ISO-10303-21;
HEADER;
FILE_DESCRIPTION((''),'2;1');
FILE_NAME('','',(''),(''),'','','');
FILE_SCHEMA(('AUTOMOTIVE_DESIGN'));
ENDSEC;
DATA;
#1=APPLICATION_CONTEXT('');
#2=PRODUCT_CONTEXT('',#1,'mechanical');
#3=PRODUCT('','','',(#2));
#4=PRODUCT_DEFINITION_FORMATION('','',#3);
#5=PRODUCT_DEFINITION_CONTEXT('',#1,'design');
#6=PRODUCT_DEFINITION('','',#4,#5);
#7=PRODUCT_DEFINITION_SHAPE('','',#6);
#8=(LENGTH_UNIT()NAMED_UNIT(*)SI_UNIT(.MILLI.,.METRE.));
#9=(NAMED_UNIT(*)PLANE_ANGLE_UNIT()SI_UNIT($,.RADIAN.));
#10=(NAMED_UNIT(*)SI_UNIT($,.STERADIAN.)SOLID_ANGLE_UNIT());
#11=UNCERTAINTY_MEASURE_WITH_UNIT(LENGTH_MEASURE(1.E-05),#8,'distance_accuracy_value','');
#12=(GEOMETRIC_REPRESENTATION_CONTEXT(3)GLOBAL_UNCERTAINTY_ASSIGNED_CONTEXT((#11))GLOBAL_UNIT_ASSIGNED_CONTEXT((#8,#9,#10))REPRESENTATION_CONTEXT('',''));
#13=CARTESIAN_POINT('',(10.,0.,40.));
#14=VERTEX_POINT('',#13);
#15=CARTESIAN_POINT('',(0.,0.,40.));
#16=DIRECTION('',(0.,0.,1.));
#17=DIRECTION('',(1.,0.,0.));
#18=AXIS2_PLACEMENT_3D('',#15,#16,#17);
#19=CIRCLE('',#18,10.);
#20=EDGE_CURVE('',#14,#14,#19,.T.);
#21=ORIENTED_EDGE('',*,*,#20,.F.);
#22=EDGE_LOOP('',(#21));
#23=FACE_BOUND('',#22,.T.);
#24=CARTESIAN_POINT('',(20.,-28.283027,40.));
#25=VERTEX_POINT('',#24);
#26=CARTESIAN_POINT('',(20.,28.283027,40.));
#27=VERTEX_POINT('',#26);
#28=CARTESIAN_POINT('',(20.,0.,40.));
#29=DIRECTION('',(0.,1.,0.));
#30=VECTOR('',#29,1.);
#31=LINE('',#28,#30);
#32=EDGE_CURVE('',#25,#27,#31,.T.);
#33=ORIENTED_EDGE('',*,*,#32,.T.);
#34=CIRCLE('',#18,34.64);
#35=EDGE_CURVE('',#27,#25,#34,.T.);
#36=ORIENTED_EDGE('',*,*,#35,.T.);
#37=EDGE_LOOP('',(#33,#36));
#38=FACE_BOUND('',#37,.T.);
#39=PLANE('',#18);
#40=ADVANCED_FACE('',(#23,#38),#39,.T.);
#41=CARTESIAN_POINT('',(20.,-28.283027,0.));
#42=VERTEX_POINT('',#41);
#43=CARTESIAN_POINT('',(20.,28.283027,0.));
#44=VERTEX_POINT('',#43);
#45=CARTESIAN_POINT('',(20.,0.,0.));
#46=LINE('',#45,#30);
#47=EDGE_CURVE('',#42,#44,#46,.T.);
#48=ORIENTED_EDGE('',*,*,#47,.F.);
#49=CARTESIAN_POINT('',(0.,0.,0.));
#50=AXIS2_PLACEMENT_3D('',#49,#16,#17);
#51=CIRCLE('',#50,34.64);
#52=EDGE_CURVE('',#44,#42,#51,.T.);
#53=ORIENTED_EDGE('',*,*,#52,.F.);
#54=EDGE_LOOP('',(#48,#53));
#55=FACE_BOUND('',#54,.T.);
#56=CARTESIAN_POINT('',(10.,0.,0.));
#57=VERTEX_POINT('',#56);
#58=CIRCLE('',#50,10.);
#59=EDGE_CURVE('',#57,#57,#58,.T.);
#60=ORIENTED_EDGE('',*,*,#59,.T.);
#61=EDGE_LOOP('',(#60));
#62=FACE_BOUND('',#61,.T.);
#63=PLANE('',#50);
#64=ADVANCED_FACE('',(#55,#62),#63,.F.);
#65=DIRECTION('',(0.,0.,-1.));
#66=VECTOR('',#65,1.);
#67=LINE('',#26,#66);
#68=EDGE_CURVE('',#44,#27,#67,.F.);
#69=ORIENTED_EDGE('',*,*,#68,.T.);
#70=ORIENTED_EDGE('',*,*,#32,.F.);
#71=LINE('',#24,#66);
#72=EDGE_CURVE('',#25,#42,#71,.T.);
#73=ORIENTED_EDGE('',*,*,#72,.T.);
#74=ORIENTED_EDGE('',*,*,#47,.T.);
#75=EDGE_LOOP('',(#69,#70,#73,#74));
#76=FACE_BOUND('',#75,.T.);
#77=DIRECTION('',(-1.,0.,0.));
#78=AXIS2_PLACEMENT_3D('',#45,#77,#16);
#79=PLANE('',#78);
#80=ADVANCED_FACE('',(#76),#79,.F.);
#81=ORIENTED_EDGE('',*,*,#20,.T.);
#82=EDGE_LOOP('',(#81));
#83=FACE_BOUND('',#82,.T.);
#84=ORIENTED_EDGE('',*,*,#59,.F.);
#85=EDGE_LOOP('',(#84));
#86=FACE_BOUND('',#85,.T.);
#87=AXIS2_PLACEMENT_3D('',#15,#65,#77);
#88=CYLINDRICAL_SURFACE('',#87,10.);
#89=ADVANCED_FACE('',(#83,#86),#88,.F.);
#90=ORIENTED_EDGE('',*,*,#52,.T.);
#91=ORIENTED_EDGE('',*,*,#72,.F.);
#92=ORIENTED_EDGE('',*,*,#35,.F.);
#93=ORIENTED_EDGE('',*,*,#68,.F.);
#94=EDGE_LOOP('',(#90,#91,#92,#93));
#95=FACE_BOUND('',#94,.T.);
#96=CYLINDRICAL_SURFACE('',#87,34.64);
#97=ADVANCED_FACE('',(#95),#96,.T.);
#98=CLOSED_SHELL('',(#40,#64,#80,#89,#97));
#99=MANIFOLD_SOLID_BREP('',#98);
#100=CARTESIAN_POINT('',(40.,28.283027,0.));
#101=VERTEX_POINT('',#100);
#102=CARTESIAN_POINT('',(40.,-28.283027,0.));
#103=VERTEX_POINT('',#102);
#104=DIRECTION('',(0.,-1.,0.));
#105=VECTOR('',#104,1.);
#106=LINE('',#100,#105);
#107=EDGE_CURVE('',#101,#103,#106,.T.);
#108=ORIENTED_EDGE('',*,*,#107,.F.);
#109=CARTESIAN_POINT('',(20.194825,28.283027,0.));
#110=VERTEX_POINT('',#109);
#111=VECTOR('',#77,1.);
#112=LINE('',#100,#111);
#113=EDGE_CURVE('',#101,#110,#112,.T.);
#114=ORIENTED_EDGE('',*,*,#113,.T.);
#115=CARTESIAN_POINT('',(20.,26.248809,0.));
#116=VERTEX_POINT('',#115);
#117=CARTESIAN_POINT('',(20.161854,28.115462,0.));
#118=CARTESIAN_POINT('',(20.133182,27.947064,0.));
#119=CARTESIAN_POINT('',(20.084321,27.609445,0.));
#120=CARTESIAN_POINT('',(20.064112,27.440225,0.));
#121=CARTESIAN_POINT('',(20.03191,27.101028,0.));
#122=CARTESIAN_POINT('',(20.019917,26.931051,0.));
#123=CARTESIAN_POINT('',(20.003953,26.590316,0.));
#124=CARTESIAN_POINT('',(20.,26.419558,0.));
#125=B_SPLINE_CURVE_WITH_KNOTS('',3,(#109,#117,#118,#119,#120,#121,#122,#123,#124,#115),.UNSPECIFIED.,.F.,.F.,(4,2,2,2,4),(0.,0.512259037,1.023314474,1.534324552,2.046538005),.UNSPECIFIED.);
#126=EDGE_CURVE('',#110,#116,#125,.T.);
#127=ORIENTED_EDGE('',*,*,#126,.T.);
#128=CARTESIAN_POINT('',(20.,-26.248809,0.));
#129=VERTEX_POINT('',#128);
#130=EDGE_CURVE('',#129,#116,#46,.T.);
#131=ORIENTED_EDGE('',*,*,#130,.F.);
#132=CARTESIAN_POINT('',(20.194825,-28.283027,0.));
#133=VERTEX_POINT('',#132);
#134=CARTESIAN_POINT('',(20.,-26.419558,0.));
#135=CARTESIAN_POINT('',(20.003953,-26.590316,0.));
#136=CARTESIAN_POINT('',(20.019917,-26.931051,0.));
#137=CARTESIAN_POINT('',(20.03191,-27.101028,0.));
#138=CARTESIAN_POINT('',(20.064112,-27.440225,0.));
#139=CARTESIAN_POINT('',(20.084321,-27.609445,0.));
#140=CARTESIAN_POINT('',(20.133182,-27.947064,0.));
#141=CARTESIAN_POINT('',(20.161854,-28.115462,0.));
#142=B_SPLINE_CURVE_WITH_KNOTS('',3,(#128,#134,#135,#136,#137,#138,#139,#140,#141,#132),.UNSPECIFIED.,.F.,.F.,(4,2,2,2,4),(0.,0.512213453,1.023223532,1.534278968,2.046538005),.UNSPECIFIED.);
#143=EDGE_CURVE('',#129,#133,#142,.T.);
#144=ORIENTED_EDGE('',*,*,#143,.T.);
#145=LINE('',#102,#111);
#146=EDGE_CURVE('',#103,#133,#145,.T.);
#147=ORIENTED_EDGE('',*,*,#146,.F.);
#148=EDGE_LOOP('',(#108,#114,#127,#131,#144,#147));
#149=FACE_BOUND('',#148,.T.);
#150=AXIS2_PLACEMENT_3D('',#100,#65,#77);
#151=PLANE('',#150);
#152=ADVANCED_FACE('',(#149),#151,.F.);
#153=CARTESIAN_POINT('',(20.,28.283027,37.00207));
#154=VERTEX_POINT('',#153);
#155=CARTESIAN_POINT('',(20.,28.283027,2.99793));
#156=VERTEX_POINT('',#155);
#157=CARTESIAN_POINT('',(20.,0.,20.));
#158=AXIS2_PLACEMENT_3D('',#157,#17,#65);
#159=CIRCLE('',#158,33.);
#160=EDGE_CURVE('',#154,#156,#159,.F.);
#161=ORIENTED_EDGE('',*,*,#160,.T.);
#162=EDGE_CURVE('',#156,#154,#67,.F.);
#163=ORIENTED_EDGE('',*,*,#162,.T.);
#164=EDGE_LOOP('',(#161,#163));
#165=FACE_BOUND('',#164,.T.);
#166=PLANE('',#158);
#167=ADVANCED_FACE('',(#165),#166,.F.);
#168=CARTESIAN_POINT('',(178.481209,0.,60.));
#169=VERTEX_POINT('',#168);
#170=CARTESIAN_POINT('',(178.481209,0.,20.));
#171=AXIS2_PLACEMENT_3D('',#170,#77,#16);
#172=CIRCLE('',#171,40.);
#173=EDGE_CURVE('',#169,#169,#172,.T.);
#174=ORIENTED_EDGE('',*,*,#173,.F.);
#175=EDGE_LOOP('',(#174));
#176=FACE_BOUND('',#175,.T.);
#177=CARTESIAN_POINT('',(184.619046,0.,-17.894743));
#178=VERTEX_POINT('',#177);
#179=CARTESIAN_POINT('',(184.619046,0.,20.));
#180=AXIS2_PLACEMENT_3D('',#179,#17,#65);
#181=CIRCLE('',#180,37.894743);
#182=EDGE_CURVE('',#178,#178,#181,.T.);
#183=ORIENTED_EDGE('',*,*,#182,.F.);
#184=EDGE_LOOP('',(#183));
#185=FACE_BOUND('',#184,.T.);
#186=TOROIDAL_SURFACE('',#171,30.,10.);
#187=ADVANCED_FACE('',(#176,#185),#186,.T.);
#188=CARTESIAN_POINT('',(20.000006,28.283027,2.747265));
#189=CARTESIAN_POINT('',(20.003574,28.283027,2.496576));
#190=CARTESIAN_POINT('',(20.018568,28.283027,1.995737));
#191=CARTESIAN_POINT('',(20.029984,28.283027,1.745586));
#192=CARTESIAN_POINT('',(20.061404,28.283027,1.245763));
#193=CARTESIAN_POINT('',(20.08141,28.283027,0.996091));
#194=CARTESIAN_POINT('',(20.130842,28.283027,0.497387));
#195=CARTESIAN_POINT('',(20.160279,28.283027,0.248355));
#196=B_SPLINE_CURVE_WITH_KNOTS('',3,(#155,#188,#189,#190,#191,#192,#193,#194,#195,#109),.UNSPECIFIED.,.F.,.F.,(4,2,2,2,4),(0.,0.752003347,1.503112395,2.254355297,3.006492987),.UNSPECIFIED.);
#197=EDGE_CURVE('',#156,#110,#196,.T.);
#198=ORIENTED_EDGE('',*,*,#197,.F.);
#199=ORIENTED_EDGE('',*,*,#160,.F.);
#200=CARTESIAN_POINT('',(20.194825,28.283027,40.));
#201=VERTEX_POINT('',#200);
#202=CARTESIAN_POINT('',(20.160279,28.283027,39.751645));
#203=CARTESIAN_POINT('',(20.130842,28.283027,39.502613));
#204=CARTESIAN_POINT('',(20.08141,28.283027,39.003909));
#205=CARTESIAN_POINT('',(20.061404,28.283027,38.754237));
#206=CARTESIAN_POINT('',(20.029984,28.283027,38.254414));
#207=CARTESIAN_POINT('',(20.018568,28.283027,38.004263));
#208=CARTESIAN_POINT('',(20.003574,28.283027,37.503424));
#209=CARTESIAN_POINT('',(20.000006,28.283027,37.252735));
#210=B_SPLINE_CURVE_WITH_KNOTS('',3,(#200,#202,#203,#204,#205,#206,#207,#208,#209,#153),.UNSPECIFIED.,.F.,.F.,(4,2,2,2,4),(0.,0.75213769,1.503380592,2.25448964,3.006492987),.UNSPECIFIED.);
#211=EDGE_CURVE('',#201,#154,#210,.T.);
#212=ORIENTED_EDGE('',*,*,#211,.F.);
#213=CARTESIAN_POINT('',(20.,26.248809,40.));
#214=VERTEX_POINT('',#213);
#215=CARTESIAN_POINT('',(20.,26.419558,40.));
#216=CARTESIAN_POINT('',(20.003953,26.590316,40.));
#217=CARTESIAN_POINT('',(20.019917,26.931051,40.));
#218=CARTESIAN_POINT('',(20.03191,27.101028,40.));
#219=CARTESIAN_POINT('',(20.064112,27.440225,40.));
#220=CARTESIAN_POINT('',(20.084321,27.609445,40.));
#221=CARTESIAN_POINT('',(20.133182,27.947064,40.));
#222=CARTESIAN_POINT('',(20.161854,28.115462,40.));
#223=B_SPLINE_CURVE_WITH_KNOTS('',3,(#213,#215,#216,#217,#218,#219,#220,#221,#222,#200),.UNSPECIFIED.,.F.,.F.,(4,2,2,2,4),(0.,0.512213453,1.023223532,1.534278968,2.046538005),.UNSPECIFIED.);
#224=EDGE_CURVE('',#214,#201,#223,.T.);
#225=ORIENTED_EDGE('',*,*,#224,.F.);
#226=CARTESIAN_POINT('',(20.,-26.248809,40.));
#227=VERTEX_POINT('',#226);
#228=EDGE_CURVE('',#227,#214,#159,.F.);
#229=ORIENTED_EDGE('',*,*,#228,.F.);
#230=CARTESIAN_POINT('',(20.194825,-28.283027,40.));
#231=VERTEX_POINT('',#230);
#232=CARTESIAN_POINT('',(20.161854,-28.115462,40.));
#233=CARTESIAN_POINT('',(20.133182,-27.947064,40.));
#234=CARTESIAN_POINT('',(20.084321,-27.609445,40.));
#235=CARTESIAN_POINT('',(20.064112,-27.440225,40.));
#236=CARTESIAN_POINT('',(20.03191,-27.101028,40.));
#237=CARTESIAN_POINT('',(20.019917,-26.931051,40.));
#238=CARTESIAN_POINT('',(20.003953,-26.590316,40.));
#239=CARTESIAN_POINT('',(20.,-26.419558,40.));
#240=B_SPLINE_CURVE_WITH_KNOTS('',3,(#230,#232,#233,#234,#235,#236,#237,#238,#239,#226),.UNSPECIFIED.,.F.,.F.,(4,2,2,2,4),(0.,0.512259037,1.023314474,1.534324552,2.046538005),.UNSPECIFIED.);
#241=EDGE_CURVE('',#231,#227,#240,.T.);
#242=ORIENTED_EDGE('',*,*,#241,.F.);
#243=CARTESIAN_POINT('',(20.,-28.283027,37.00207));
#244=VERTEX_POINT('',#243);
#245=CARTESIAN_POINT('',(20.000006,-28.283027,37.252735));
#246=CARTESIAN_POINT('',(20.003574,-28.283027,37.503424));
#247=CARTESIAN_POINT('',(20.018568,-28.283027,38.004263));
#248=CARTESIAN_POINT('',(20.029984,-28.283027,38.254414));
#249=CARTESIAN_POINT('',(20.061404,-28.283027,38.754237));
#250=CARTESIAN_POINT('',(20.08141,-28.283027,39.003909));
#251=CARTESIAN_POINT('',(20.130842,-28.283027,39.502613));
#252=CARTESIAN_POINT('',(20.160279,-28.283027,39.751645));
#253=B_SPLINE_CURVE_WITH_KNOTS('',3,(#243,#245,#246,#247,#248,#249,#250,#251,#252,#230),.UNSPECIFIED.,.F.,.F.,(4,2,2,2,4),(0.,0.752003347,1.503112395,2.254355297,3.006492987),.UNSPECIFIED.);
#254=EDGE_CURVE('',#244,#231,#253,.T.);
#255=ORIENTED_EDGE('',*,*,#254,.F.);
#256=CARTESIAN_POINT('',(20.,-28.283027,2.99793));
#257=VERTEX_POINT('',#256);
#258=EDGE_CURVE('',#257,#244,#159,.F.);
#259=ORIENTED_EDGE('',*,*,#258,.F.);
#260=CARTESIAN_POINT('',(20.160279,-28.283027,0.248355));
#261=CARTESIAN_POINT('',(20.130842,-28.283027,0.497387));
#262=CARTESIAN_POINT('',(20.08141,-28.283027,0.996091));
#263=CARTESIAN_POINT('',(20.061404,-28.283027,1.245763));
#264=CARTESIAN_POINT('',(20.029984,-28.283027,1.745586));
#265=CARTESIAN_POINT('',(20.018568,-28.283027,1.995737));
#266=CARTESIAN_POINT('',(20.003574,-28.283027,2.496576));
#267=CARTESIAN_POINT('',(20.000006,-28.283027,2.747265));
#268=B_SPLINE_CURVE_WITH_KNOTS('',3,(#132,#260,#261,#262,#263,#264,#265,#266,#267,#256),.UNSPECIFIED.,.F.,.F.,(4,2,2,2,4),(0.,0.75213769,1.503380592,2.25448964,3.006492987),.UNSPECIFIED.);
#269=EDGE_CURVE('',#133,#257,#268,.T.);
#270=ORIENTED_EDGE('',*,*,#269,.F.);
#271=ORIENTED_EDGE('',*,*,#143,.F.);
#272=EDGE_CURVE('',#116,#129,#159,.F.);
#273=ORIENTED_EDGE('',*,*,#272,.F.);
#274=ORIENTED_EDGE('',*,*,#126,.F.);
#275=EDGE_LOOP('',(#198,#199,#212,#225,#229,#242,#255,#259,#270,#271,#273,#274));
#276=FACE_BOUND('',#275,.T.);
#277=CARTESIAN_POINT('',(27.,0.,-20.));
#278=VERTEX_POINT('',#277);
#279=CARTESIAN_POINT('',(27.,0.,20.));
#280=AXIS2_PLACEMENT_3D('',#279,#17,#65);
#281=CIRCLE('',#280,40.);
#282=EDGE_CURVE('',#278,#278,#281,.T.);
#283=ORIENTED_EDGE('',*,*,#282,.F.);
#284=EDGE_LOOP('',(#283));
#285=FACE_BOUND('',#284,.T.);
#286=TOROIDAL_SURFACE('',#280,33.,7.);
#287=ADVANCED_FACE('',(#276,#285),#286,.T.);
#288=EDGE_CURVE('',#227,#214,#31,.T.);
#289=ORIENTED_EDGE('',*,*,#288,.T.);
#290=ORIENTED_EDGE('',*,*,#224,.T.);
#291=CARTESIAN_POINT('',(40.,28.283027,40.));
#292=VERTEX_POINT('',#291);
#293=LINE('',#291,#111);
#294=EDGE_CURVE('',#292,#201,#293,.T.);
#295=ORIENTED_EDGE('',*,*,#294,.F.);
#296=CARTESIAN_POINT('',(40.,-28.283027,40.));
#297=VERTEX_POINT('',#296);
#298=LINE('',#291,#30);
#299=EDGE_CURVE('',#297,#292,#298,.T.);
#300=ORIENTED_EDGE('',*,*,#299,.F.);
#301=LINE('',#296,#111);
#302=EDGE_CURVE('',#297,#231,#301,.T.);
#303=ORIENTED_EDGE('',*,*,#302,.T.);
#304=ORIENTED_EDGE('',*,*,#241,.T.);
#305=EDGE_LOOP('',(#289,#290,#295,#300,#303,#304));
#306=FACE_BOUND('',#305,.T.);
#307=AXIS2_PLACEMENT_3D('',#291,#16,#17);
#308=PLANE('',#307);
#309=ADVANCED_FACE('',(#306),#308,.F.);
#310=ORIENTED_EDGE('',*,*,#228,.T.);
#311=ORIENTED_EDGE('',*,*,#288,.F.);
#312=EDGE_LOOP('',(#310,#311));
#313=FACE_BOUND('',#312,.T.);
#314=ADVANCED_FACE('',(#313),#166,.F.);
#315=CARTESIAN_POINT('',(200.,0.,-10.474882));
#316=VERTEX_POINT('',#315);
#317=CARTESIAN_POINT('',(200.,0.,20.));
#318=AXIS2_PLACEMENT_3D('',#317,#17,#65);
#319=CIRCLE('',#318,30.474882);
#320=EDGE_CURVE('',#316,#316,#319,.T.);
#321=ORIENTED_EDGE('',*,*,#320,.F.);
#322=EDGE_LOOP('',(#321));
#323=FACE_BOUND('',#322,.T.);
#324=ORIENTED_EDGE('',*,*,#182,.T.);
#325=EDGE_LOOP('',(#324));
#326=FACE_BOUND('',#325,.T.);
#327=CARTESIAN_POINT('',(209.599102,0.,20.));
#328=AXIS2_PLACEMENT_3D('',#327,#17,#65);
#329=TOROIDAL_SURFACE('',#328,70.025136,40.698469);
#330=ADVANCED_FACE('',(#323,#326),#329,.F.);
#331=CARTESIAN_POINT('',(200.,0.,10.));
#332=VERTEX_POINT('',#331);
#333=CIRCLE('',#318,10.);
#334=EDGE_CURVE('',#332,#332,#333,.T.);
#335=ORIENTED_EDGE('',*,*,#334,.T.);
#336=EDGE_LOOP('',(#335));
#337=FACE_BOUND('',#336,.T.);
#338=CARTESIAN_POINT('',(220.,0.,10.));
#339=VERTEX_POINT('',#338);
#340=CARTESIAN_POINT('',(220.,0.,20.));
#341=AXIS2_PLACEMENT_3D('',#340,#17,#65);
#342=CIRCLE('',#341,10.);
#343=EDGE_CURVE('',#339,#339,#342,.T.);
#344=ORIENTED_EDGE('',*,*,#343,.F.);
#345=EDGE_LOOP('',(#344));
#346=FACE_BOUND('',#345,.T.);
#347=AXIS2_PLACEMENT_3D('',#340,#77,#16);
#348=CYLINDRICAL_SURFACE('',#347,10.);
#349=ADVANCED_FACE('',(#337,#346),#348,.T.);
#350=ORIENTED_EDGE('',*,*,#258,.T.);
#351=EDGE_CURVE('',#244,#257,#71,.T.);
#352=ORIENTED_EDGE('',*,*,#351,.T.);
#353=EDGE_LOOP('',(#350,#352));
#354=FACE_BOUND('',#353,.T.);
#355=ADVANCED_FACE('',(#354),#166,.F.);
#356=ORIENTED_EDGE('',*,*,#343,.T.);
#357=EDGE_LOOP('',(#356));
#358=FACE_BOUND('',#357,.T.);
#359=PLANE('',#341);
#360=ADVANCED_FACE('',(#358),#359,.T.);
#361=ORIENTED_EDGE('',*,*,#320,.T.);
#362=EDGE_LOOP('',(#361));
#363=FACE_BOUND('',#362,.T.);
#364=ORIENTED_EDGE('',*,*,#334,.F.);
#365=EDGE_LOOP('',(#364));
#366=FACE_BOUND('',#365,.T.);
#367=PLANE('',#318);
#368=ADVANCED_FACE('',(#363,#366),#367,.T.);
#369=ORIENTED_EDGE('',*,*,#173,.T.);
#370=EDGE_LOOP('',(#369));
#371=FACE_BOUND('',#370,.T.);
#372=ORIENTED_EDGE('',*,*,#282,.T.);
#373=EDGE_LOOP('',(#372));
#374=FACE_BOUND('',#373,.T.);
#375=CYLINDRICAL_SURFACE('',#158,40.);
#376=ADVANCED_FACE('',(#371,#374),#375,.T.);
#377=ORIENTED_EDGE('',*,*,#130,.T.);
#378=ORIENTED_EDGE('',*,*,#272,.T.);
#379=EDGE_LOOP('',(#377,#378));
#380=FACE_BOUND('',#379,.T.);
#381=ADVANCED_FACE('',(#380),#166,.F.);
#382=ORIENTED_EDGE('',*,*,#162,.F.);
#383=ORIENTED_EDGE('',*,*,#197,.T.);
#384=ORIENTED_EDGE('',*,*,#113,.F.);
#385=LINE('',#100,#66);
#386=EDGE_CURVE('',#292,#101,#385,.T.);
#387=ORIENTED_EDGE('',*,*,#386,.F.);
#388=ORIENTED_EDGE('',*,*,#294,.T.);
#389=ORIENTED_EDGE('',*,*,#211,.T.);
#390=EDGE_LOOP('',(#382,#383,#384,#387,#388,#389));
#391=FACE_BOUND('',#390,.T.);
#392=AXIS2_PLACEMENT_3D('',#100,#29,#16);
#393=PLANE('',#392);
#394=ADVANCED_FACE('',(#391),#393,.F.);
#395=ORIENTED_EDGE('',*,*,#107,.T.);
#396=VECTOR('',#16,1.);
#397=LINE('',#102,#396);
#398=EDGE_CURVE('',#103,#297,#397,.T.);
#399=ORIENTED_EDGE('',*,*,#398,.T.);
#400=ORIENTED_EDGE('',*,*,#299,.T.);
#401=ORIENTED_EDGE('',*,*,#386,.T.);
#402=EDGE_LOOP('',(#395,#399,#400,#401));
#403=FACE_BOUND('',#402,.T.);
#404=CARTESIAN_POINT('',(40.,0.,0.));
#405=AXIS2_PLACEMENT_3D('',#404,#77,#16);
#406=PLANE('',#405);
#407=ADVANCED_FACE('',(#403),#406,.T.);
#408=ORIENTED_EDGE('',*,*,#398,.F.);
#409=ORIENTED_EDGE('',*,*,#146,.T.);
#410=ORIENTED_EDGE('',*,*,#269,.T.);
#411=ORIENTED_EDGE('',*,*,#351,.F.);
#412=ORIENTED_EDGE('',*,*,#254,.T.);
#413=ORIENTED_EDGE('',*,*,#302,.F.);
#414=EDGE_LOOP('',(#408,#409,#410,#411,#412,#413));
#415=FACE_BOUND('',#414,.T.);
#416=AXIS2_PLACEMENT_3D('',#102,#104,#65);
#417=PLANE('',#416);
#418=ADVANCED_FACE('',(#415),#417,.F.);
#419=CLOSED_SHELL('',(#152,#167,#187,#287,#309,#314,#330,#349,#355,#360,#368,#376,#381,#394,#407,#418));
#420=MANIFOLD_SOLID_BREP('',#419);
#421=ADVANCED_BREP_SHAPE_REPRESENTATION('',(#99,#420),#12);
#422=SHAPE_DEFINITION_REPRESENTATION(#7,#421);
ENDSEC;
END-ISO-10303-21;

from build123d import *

# Parameters (mm, degrees)
SKETCH1_R                = 34.64
BOSS_EXTRUDE1_DEPTH      = 40
SKETCH2_R                = 10
CUT_EXTRUDE2_DEPTH       = 64.244440072
BOSS_EXTRUDE2_DEPTH      = 160
BOSS_EXTRUDE2_DEPTH_BACK = 20
SKETCH4_R                = 40
SKETCH5_W                = 40
SKETCH5_H                = 56.566053424
CUT_EXTRUDE3_DEPTH       = 20
FILLET1_R                = 10
FILLET2_R                = 7
SKETCH7_R                = 10
BOSS_EXTRUDE5_DEPTH      = 20


with BuildPart() as part:
    # Sketch1 → Boss-Extrude1 (new body)
    with BuildSketch(Plane.XY):
        Circle(SKETCH1_R)
    extrude(amount=BOSS_EXTRUDE1_DEPTH)

    # Sketch2 → Cut-Extrude2 (cut, through all)
    with BuildSketch(Plane.XY):
        Circle(SKETCH2_R)
    extrude(amount=CUT_EXTRUDE2_DEPTH, mode=Mode.SUBTRACT)

    # Sketch4 → Boss-Extrude2 (add, two sides: drawn at the far end of the back side and taken through both)
    with BuildSketch(Plane(origin=(40, 0, 0), x_dir=(0, 0, -1), z_dir=(1, 0, 0)).offset(-BOSS_EXTRUDE2_DEPTH_BACK)):
        with Locations((-20, 0)):
            Circle(SKETCH4_R)
    extrude(amount=BOSS_EXTRUDE2_DEPTH + BOSS_EXTRUDE2_DEPTH_BACK)

    # Sketch5 → Cut-Extrude3 (cut)
    with BuildSketch(Plane.ZY.offset(-20)):
        with Locations((20, 0)):
            Rectangle(SKETCH5_W, SKETCH5_H)
    extrude(amount=-CUT_EXTRUDE3_DEPTH, mode=Mode.SUBTRACT)


with BuildPart() as cut_extrude3_piece_1:
    # of the separate pieces the step leaves, piece 1, a body of its own (cut_extrude3_pieces)
    add(part.part.solids().sort_by_distance((20, 0, -20))[0])

    # Sketch6 → Cut-Revolve1 (revolve, cut)
    with BuildSketch(Plane(origin=(0, 0, 0), x_dir=(1, 0, 0), z_dir=(0, 1, 0))):
        with BuildLine():
            Line((182.124448295, 20), (200, 20))
            Line((200, 20), (200, 10.474881664))
            ThreePointArc((200, 10.474881664), (190.460193711, 14.107625347), (182.124448295, 20))
        make_face()
    revolve(axis=Axis((200, 0, 20), (-1, 0, 0)), mode=Mode.SUBTRACT)

    # Fillet1
    fillet1_edges = [cut_extrude3_piece_1.edges().sort_by_distance(p)[0] for p in [
        (182.124448295, 0, 60),
    ]]
    fillet(fillet1_edges, radius=FILLET1_R)

    # Fillet2
    # the kernel refuses this fillet: 7 mm, written as the material it takes off along each edge
    with BuildSketch(Plane(origin=(20, 0, 20), x_dir=(0, 0, -1), z_dir=(0, -1, 0))) as fillet2_piece_1:
        with BuildLine():
            CenterArc((40 - FILLET2_R, FILLET2_R), FILLET2_R, 270, 90)
            Line((40 - FILLET2_R, 0), (40, 0))
            Line((40, 0), (40, FILLET2_R))
        make_face()
    revolve(axis=Axis((20, 0, 20), (1, 0, 0)), mode=Mode.SUBTRACT)

    # Sketch7 → Boss-Extrude5 (add)
    with BuildSketch(Plane(origin=(200, 0, 0), x_dir=(0, 0, -1), z_dir=(1, 0, 0))):
        with Locations((-20, 0)):
            Circle(SKETCH7_R)
    extrude(amount=BOSS_EXTRUDE5_DEPTH)


with BuildPart() as cut_extrude3_piece_2:
    # of the separate pieces the step leaves, piece 2, a body of its own (cut_extrude3_pieces)
    add(part.part.solids().sort_by_distance((10, 0, 0))[0])


solid = Compound([cut_extrude3_piece_1.part, cut_extrude3_piece_2.part])
